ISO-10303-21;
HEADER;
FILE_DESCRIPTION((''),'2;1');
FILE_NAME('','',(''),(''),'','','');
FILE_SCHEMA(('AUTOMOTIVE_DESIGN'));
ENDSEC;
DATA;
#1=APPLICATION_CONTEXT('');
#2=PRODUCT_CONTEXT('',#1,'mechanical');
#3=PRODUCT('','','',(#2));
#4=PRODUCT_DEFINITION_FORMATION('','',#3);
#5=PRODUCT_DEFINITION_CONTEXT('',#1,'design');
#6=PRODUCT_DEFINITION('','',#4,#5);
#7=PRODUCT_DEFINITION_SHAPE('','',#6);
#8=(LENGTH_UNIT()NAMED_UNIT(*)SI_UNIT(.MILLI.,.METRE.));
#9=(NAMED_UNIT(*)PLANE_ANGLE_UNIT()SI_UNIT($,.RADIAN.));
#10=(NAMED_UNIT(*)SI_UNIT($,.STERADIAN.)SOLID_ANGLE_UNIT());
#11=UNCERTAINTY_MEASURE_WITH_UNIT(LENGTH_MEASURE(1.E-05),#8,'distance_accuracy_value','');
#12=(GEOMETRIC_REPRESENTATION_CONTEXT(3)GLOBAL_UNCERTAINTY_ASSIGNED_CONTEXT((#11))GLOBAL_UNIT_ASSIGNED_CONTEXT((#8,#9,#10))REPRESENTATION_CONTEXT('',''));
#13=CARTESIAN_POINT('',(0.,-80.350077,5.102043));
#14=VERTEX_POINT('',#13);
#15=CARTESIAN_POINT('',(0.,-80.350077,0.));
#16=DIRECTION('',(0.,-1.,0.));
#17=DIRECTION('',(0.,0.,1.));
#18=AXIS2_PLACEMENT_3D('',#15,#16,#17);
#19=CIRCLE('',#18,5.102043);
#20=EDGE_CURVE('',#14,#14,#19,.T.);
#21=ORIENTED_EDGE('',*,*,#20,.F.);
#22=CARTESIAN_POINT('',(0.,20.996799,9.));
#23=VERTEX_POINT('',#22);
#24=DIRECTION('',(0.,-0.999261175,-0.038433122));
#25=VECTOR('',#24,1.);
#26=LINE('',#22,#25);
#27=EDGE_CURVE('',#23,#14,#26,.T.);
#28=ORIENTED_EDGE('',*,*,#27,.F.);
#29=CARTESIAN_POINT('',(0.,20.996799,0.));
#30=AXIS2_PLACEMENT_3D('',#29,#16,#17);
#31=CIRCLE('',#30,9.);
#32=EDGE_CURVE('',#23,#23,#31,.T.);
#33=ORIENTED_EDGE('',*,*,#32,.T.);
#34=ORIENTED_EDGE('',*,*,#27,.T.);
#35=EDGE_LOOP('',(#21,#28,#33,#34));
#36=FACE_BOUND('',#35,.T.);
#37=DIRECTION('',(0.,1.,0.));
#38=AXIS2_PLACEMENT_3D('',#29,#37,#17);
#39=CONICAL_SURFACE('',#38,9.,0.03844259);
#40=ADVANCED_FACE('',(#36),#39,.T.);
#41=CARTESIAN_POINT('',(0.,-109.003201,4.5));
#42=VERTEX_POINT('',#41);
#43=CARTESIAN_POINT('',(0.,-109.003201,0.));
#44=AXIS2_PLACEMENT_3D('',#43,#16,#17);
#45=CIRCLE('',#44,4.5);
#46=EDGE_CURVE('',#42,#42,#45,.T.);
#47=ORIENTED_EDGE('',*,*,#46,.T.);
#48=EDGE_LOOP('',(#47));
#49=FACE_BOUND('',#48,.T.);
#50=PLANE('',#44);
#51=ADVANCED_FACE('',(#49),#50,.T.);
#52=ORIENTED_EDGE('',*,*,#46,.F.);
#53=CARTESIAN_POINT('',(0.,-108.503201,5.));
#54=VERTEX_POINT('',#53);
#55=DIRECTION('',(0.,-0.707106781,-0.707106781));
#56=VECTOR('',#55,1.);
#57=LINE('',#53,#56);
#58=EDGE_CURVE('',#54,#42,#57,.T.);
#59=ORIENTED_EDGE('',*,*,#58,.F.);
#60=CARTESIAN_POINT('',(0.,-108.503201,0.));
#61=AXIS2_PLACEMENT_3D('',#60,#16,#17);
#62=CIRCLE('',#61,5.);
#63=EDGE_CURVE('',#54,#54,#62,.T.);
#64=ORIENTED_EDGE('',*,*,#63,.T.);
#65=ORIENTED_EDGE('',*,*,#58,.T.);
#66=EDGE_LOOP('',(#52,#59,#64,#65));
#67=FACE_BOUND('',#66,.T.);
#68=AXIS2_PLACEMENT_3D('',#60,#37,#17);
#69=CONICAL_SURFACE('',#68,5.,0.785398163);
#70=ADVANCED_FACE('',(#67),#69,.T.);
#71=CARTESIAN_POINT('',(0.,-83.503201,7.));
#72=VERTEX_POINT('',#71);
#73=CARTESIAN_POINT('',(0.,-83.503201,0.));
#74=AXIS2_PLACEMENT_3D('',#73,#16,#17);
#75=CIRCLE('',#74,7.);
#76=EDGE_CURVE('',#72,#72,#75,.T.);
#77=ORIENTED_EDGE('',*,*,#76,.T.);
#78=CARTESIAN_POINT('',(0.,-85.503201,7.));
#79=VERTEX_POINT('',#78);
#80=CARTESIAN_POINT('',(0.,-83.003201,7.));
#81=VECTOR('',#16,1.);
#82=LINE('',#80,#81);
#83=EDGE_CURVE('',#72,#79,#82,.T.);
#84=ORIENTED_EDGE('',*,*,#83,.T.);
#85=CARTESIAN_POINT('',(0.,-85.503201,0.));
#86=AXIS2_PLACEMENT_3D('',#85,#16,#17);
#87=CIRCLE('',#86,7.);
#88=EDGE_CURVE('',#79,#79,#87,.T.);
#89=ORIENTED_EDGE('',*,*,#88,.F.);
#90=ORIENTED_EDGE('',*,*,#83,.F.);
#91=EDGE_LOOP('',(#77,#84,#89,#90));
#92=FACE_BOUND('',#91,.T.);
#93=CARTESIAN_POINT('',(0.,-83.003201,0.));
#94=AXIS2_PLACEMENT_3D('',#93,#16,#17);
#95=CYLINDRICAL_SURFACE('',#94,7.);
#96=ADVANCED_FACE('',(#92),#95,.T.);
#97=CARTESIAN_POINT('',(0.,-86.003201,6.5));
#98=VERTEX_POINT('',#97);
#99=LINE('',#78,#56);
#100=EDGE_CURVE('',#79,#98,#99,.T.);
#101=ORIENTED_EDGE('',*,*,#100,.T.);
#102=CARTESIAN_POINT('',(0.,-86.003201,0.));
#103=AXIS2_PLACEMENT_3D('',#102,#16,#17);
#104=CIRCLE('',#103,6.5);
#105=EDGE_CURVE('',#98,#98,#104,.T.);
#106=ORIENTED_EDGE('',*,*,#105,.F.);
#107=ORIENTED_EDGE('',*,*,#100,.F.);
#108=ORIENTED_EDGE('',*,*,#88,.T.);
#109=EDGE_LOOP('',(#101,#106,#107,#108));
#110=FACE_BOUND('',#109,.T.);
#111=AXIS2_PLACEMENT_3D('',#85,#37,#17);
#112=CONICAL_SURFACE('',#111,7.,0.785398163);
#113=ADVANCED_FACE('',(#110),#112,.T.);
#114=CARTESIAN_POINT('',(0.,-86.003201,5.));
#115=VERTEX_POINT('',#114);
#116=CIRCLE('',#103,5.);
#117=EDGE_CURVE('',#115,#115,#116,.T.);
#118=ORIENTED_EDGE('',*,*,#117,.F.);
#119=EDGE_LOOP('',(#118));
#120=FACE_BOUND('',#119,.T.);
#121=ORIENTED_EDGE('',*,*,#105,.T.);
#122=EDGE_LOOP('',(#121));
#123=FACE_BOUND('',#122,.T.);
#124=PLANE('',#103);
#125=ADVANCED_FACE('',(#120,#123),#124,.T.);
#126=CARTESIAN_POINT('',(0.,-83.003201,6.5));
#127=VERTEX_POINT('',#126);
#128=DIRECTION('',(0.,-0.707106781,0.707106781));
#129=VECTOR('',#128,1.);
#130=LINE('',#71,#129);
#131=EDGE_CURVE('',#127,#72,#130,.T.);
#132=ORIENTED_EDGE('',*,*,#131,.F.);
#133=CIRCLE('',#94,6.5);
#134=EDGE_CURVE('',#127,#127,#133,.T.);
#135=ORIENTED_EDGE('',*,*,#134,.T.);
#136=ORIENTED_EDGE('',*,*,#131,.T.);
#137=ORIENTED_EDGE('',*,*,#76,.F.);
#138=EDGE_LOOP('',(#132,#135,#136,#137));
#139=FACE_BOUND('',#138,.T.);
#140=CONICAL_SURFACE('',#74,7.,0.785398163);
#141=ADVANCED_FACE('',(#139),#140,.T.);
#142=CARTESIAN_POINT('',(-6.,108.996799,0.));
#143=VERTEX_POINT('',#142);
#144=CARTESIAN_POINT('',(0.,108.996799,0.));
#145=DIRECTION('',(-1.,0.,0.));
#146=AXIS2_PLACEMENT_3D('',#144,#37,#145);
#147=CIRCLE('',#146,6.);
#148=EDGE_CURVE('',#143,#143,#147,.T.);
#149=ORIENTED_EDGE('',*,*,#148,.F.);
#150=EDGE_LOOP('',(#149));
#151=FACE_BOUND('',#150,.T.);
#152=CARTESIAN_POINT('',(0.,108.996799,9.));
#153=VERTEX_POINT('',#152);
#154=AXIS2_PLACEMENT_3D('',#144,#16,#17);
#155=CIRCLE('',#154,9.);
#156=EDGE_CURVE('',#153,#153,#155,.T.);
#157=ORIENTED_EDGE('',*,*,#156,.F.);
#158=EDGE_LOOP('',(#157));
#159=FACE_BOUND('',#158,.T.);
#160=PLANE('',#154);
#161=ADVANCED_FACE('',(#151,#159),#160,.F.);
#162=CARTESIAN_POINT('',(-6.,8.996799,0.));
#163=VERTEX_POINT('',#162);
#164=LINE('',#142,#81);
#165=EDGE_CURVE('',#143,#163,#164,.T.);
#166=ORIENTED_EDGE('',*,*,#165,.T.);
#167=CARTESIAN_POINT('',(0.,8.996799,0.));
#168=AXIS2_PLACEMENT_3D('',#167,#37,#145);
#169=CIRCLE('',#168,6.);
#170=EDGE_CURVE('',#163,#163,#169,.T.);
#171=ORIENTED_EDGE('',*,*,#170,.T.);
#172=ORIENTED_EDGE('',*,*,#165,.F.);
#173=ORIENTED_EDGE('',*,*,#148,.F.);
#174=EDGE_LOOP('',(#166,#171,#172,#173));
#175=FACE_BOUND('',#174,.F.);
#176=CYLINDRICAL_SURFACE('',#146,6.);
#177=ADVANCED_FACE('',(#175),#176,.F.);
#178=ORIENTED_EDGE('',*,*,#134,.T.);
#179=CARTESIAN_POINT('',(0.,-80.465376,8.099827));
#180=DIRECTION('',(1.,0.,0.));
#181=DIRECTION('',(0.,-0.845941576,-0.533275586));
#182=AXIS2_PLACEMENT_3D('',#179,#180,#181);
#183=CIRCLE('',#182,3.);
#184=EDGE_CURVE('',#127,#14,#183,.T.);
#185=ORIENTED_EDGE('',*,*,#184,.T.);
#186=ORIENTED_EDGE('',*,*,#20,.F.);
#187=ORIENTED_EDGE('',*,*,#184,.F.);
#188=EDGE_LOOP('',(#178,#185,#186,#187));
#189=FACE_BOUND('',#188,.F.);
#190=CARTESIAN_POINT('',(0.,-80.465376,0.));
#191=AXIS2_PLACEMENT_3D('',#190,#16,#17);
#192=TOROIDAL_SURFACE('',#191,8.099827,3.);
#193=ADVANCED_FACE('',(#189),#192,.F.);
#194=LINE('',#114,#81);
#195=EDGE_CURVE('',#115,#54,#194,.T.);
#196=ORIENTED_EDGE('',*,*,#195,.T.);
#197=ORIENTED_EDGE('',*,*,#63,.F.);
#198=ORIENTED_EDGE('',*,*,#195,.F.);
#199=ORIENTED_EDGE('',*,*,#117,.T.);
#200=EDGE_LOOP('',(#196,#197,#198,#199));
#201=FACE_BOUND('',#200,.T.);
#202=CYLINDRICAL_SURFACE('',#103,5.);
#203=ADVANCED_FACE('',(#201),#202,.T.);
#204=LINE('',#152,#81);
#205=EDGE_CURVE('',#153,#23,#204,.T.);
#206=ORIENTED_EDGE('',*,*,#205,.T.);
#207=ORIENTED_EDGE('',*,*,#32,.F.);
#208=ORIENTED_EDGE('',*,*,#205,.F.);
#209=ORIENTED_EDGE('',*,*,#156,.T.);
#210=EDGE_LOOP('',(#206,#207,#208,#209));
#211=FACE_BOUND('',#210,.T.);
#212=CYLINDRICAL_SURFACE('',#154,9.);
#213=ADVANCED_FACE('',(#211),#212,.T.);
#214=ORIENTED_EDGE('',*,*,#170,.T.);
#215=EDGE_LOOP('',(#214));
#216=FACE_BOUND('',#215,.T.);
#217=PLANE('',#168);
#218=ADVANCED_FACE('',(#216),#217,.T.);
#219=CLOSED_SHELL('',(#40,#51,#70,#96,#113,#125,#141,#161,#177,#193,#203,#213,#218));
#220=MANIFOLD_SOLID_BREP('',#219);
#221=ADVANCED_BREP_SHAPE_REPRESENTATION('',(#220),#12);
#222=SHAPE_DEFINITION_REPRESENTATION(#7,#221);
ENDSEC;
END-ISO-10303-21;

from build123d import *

# Parameters (mm, degrees)
F2_R     = 6
F3_DEPTH = 100
F4_SIZE  = 0.5


# Not quite as in the source:
# - a fillet or chamfer that OpenCascade refuses, or shapes differently, is made with other operations: its cross-section is extruded or revolved along the edge and cut away or added


with BuildPart() as f1:
    # F0 (on Right) → F1 (revolve)
    with BuildSketch(Plane.YZ):
        Polygon((108.9967988729, 0), (108.9967988729, 9), (20.9967988729, 9), (-83.0032011271, 5), (-83.0032011271, 7), (-86.0032011271, 7), (-86.0032011271, 5), (-109.0032011271, 5), (-109.0032011271, 0), align=None)
    revolve(axis=Axis((0, -0.0032011271, 0), (0, -1, 0)))

    # F2 (on face) → F3 (cut)
    with BuildSketch(Plane(origin=(0, 108.9967988729, 0), x_dir=(-1, 0, 0), z_dir=(0, 1, 0))):
        Circle(F2_R)
    extrude(amount=-F3_DEPTH, mode=Mode.SUBTRACT)

    # F4
    f4_edges = [f1.edges().sort_by_distance(p)[0] for p in [
        (0, -109.003201, -5),
        (0, -83.003201, -7),
        (0, -86.003201, -7),
    ]]
    chamfer(f4_edges, length=F4_SIZE)

    # F5: fillet of radius 3 on 1 edges, made by hand

    # F5_s1 → F5_t2 (revolve)
    with BuildSketch(Plane.YZ):
        with BuildLine():
            ThreePointArc((-83.0032011271, 6.5), (-81.8638498753, 5.4457220241), (-80.350077034, 5.1020432343))
            Line((-80.350077034, 5.1020432343), (-80.3477710467, 5.0420875639))
            Line((-80.3477710467, 5.0420875639), (-83.0008951397, 4.9400443295))
            Line((-83.0008951397, 4.9400443295), (-83.0632011271, 5))
            ThreePointArc((-83.0632011271, 5), (-83.0632011271, 5.75), (-83.0539576216, 6.4680034648))
            Line((-83.0539576216, 6.4680034648), (-83.0032011271, 6.5))
        make_face()
    revolve(axis=Axis((0, -83.0032011271, 0), (0, -1, 0)))


solid = f1.part
